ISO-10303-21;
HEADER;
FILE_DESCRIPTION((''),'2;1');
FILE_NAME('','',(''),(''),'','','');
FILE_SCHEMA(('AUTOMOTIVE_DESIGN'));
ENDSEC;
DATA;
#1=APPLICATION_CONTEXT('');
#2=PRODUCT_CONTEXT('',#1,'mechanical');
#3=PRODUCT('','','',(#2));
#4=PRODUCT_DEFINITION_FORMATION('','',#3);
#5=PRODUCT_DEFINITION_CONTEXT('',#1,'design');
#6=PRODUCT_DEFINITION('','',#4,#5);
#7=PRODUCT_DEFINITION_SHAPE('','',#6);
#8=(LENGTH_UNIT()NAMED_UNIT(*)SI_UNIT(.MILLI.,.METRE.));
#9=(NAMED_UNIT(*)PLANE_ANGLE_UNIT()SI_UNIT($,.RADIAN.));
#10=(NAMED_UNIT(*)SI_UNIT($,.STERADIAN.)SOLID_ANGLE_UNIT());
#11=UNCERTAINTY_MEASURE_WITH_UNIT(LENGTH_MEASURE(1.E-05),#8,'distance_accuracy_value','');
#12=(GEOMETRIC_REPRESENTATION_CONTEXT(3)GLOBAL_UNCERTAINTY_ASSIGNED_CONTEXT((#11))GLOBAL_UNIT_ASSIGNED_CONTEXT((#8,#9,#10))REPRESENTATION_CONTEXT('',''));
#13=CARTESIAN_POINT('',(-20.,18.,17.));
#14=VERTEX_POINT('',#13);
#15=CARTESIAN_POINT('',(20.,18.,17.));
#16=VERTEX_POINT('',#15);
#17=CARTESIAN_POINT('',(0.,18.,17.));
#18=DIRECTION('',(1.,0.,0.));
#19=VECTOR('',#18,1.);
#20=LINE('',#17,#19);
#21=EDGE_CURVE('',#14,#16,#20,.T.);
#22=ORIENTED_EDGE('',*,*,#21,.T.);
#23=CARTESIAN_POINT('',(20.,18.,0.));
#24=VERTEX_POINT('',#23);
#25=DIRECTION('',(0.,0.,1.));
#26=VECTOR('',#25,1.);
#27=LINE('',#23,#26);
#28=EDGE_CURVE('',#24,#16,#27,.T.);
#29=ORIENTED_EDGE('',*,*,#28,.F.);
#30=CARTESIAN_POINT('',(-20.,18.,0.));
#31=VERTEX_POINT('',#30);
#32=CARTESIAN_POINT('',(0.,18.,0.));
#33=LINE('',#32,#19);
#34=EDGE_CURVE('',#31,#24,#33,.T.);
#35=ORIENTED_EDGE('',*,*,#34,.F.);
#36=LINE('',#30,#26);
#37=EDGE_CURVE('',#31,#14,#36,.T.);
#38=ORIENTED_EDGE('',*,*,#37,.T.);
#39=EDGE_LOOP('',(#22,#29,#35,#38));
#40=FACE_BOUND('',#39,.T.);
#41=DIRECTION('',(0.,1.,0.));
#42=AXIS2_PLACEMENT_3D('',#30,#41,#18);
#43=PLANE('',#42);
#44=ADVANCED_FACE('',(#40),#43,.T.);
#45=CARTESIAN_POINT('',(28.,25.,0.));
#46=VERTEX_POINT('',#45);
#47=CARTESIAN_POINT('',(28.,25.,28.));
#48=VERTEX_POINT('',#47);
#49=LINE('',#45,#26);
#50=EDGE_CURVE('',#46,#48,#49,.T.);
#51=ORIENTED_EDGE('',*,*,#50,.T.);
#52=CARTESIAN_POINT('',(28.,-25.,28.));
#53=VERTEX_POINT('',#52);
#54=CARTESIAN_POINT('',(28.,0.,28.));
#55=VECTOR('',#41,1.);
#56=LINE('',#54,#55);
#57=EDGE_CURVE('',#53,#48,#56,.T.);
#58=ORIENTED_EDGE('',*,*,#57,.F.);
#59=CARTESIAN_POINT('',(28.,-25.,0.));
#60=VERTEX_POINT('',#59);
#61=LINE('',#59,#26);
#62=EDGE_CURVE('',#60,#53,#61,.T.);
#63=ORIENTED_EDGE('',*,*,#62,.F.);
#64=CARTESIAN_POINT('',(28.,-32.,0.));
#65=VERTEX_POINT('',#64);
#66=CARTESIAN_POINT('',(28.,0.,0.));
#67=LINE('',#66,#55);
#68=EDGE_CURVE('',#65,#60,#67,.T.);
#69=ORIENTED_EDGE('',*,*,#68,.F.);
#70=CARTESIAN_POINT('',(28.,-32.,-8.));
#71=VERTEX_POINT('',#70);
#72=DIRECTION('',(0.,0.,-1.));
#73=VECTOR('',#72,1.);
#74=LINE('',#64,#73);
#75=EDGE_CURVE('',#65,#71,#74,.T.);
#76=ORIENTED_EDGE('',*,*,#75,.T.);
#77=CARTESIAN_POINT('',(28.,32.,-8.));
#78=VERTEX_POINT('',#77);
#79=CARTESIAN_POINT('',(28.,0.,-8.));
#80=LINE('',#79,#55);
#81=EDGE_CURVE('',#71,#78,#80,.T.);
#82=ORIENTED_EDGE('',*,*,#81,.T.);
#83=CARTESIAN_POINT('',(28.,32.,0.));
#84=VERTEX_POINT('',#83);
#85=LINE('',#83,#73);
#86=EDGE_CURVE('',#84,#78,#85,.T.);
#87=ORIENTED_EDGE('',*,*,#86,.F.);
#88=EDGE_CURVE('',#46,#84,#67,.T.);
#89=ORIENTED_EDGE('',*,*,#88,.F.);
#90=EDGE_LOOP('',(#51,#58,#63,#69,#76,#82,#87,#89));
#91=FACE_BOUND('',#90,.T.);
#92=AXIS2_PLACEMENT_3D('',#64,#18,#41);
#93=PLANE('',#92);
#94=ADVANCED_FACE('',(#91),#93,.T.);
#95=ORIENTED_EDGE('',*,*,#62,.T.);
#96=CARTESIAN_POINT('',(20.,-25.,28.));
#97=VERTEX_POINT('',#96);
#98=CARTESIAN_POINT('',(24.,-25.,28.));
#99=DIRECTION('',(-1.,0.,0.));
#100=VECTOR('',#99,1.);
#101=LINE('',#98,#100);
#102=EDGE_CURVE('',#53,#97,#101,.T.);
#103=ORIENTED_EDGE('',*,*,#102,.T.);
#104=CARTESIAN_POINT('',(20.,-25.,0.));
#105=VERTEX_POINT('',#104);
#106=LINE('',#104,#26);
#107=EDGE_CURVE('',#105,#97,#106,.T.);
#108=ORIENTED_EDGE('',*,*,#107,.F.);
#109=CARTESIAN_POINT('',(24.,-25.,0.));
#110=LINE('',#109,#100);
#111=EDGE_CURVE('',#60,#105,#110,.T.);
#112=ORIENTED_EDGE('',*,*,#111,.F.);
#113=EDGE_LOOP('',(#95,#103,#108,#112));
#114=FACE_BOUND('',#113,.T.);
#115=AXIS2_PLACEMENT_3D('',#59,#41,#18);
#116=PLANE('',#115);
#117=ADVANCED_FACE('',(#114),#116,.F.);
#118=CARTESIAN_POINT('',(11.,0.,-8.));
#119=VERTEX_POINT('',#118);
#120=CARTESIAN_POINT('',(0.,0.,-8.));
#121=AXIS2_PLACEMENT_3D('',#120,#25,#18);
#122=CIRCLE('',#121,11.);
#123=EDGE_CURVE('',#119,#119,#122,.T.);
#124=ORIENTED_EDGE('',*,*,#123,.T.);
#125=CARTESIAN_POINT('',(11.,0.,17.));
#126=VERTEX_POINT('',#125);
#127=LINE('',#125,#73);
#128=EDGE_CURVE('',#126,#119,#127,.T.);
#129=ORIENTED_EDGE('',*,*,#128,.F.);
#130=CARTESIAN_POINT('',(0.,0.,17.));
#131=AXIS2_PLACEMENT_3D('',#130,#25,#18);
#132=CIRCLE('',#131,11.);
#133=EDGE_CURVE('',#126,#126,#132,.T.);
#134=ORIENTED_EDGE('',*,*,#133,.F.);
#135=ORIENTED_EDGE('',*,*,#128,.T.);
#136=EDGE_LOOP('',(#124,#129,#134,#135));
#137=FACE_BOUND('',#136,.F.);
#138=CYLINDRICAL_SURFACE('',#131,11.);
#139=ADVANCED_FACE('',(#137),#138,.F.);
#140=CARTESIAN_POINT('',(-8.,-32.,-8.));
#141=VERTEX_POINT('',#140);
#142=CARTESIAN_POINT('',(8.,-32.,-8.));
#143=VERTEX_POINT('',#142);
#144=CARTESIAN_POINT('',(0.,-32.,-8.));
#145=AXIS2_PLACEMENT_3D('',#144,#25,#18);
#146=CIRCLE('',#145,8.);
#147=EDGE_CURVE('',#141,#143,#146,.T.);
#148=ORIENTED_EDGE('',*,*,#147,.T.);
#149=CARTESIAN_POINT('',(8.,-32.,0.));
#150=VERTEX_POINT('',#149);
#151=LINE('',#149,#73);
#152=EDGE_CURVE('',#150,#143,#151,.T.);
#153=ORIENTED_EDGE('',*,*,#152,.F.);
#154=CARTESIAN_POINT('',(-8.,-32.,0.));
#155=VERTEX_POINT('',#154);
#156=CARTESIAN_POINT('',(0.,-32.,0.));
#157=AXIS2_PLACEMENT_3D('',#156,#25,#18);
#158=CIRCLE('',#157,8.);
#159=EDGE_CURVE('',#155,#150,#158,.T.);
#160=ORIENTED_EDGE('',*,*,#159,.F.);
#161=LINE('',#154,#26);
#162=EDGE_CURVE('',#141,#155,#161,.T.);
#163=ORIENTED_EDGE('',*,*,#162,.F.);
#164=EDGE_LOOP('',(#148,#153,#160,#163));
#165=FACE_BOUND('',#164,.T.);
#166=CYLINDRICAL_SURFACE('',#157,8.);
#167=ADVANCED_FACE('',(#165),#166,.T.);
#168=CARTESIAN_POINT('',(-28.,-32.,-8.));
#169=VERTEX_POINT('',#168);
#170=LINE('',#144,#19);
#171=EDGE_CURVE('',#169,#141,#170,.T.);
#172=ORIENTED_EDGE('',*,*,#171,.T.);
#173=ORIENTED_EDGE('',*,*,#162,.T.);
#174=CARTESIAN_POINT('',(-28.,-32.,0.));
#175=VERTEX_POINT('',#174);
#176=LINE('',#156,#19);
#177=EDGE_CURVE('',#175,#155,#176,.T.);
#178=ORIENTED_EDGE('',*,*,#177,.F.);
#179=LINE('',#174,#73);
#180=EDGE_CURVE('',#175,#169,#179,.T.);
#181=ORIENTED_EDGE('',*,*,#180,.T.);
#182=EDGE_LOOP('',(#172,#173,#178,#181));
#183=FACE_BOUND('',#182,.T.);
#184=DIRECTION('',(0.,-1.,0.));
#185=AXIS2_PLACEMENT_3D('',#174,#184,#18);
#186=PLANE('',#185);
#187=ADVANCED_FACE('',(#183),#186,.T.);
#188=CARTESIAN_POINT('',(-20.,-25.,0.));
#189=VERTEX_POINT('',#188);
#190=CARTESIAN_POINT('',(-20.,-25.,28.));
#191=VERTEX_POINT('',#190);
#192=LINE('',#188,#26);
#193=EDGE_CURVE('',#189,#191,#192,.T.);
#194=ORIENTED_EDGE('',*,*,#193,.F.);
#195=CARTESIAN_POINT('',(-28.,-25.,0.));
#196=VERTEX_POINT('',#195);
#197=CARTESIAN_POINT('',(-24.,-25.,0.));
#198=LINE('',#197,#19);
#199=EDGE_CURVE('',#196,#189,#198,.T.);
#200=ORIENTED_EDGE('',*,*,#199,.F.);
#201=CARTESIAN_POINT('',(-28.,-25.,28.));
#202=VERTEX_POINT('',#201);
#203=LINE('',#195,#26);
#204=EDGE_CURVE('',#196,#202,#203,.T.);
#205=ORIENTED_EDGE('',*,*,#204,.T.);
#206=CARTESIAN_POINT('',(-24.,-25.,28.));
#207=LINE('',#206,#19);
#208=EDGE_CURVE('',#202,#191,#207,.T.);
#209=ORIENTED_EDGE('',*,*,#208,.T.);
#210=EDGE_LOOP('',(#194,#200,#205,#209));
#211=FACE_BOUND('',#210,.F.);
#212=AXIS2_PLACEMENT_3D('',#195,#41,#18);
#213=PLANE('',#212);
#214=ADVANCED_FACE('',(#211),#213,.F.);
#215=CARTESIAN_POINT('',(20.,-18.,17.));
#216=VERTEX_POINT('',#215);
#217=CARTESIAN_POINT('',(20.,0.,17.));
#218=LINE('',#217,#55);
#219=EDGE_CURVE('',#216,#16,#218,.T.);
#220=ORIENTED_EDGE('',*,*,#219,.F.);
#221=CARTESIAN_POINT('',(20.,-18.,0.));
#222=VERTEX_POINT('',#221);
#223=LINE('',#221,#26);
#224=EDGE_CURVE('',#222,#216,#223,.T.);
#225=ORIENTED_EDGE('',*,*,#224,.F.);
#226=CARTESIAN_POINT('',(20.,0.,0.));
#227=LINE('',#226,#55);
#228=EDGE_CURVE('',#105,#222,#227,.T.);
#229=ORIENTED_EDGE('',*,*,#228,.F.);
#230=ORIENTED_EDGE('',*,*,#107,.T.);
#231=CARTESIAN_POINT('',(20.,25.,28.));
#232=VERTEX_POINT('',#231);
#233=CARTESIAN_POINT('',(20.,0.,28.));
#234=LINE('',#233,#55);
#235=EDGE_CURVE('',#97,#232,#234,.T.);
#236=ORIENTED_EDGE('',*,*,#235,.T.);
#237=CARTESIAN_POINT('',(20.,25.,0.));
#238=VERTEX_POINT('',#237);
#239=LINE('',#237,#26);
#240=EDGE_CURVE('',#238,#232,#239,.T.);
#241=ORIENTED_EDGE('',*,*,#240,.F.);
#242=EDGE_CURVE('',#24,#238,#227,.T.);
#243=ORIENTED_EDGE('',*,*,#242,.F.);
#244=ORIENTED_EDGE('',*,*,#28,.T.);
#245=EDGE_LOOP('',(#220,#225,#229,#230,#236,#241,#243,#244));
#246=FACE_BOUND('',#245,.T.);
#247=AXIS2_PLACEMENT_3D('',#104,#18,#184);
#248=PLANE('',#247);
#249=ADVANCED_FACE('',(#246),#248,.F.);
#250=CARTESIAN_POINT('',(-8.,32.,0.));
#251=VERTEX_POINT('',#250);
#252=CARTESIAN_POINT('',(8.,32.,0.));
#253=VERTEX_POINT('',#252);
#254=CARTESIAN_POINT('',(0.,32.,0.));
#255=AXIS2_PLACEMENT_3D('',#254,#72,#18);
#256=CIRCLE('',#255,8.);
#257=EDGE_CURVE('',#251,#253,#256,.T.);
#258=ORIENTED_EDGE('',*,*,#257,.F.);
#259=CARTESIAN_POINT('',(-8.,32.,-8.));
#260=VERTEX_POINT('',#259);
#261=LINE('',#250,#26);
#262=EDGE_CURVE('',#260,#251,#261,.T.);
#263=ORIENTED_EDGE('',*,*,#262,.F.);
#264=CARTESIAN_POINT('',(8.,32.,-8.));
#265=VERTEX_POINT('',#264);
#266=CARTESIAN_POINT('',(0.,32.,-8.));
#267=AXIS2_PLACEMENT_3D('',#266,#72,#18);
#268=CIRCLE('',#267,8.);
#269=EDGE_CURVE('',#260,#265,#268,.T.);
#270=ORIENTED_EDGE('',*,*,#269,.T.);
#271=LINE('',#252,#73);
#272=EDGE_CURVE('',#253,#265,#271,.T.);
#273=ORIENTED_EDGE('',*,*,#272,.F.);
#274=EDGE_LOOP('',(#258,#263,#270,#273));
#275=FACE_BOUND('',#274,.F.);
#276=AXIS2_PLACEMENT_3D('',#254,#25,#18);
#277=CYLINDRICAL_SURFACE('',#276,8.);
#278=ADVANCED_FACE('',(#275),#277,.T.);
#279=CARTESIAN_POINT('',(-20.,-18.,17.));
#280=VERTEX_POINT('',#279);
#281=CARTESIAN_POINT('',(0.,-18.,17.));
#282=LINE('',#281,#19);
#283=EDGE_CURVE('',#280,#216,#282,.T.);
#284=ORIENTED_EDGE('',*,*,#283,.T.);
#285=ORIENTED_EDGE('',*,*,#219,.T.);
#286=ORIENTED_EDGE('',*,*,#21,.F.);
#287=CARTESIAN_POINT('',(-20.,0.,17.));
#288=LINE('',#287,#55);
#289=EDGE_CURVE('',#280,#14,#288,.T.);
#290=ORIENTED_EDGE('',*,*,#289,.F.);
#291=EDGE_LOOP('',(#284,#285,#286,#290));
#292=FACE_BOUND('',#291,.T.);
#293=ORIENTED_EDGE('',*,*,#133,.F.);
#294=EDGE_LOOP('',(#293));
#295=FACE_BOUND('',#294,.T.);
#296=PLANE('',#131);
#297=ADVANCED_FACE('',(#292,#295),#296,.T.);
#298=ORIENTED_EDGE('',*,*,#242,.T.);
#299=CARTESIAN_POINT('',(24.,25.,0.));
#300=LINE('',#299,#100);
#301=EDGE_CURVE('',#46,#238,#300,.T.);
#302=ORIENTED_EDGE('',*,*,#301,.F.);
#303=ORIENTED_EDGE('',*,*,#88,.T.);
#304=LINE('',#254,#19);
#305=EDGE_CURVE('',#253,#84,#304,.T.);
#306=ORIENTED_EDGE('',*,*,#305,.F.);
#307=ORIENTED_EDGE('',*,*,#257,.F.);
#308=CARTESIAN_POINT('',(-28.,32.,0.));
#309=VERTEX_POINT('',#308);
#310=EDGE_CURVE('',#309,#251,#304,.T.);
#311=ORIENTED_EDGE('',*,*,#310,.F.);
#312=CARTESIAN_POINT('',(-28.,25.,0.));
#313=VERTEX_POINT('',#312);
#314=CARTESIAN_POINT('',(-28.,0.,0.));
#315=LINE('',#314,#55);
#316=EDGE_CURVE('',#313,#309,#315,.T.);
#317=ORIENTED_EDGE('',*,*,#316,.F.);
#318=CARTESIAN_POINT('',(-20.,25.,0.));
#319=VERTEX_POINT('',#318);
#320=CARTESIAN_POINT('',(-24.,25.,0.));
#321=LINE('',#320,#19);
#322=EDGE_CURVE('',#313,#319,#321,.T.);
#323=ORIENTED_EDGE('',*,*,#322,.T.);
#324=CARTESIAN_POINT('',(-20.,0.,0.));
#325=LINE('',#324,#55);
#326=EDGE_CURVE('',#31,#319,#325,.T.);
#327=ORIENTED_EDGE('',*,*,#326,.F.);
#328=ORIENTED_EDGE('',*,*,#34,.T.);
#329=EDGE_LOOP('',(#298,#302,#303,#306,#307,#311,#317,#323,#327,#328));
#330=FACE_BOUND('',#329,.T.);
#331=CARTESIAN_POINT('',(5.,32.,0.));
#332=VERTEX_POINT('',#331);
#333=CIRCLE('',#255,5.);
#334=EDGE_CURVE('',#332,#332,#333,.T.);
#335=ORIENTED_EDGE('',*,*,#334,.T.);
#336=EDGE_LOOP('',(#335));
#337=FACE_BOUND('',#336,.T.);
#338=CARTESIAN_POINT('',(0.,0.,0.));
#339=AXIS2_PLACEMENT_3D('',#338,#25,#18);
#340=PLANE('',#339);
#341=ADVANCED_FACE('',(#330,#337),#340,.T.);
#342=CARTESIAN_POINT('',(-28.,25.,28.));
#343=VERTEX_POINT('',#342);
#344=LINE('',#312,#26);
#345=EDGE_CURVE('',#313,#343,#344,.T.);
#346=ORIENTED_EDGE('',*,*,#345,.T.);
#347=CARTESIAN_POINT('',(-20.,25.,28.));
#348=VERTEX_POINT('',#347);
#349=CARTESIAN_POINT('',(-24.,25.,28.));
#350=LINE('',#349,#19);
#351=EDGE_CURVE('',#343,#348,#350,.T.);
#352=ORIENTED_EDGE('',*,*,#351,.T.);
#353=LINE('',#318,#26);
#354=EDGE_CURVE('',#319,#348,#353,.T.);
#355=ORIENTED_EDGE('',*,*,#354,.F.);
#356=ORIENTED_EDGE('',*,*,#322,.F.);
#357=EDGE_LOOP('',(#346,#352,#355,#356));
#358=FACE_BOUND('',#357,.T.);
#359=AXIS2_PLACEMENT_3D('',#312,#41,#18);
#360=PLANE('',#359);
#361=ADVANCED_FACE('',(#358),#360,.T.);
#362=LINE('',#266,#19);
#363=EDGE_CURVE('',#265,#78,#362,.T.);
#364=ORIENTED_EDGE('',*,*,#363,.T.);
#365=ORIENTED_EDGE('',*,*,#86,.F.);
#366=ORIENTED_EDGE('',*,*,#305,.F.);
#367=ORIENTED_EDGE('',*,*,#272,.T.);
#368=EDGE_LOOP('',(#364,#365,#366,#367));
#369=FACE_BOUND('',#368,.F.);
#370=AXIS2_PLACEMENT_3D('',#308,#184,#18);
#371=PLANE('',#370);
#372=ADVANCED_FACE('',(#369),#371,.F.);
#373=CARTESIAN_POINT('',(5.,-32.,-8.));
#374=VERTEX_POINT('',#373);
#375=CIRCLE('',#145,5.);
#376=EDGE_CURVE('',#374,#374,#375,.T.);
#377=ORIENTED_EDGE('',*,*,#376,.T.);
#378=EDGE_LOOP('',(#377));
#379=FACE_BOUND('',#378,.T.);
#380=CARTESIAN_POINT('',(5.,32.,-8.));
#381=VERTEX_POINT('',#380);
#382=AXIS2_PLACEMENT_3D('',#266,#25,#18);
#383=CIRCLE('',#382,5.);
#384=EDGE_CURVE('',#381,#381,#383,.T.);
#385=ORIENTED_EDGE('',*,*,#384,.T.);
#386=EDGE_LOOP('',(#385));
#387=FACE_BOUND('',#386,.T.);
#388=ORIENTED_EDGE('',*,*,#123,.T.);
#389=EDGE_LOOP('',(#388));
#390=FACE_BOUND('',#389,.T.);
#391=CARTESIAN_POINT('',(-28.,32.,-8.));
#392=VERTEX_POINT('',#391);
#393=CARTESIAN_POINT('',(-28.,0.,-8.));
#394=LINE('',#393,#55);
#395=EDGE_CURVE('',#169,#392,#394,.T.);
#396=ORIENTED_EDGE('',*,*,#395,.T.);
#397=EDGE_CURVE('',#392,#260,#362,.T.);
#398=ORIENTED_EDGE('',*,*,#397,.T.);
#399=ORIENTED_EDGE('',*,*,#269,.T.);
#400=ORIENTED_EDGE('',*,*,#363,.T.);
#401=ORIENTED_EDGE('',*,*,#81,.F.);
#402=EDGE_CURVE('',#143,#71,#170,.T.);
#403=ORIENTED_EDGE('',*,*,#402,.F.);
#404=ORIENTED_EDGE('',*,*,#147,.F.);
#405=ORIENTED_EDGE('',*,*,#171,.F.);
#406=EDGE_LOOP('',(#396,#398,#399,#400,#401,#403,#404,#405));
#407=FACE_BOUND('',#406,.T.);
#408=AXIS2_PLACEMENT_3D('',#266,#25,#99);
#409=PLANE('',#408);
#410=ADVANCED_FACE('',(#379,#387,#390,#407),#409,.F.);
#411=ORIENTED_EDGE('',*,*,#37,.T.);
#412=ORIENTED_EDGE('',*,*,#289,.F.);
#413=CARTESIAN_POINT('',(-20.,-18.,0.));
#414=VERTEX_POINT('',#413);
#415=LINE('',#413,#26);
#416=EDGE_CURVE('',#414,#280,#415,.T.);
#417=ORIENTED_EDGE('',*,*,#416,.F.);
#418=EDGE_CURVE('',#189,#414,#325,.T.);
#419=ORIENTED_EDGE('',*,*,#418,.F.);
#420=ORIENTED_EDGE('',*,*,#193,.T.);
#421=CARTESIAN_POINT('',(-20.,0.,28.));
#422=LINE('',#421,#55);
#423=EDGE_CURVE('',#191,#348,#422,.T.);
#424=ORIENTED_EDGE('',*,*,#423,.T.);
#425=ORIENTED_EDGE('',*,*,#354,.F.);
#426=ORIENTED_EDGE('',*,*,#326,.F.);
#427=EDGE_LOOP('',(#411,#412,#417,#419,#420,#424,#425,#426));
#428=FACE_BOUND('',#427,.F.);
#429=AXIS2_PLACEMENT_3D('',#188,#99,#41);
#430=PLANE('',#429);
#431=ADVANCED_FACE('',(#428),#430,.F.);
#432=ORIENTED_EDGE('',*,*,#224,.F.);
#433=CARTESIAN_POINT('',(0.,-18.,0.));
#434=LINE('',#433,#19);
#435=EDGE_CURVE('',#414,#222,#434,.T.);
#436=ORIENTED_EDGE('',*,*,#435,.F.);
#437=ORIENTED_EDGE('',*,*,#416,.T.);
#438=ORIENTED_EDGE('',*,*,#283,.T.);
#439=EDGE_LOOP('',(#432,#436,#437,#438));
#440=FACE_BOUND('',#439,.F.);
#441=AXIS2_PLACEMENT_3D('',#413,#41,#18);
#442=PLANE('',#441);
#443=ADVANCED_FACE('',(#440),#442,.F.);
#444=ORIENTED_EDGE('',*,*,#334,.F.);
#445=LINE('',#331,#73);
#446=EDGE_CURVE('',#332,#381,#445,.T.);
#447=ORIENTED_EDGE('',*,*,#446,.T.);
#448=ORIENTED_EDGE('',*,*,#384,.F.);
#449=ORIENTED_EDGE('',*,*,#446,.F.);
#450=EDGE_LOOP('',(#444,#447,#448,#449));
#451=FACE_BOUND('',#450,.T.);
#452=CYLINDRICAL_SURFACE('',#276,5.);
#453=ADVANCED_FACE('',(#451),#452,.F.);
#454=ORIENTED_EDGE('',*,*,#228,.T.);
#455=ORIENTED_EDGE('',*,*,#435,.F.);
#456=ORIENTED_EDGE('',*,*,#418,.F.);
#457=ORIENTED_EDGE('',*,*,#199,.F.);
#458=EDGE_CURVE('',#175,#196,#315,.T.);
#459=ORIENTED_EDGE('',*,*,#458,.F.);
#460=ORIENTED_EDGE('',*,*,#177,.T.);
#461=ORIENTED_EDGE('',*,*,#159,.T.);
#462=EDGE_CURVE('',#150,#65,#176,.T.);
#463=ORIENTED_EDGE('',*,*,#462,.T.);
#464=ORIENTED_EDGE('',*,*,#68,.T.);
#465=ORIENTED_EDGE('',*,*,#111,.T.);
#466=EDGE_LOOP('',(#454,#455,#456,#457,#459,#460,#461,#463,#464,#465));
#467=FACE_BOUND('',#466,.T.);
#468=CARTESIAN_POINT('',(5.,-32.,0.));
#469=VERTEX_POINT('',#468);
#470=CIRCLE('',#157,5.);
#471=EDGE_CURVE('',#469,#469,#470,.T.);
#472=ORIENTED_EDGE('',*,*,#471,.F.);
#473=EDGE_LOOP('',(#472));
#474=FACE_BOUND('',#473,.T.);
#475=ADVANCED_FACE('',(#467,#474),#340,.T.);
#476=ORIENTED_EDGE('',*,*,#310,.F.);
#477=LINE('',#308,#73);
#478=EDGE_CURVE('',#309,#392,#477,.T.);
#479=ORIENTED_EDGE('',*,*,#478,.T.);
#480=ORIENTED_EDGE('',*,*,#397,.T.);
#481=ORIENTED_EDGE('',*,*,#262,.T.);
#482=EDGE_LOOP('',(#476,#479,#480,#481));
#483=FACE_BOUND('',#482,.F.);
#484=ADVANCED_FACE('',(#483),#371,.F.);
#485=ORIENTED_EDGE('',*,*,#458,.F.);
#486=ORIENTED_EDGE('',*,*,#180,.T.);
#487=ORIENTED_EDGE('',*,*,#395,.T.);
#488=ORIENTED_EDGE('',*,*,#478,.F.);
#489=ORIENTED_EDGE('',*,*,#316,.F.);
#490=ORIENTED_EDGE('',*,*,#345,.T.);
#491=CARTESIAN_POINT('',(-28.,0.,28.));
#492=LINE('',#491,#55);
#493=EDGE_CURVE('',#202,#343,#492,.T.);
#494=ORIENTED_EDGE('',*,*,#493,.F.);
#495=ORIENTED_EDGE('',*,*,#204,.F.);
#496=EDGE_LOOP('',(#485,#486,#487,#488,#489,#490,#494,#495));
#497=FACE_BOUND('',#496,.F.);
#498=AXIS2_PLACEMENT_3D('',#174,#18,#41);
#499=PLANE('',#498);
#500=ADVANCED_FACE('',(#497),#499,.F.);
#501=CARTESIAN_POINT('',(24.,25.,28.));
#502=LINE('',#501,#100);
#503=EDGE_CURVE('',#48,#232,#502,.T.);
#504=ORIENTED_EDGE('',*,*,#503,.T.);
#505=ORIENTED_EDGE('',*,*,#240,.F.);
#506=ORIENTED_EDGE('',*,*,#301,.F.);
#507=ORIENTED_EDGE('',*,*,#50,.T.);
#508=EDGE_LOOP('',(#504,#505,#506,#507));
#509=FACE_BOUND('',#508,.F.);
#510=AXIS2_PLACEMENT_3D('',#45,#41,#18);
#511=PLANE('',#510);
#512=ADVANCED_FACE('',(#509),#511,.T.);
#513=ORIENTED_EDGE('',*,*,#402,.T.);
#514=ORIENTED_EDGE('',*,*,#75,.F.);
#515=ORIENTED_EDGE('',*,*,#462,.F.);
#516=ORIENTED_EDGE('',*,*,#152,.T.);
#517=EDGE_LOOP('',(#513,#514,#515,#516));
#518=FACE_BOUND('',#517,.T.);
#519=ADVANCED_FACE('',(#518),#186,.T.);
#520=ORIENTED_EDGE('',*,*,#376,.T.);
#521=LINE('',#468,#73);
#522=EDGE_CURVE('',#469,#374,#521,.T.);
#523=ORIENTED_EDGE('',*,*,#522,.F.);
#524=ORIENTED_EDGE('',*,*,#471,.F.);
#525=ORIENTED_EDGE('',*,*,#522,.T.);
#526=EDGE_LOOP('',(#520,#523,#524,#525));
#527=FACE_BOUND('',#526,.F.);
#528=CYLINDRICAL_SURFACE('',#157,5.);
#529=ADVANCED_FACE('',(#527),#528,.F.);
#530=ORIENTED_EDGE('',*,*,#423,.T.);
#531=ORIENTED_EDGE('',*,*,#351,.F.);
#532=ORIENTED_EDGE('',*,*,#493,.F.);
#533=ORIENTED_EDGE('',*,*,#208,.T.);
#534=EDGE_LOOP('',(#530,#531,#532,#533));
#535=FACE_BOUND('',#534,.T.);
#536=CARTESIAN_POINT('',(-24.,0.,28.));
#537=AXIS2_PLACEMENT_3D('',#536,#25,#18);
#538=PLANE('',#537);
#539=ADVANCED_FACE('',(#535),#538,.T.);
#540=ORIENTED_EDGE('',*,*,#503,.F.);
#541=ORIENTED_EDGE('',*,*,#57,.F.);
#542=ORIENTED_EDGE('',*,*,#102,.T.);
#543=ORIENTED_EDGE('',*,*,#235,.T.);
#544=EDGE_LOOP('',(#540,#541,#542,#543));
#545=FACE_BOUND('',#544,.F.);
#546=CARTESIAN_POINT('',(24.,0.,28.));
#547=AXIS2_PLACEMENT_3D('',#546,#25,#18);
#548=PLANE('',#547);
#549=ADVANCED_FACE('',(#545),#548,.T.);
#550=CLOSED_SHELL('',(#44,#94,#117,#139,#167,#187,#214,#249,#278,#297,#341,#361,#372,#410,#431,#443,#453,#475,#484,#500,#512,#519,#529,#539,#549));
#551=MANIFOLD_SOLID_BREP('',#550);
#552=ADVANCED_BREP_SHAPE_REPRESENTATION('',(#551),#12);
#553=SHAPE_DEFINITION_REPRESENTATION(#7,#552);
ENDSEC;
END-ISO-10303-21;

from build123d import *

# Parameters (mm, degrees)
F0_W      = 56
F0_H      = 64
F1_DEPTH  = 8
F2_W      = 8
F2_H      = 50
F3_DEPTH  = 28
F4_R      = 8
F5_DEPTH  = 8
F6_R      = 5
F7_DEPTH  = 8.001
F8_W      = 40
F8_H      = 36
F9_DEPTH  = 17
F10_R     = 11
F11_DEPTH = 25.001


# Not quite as in the source:
# - a pattern or mirror of a feature is missing from the dataset's text; its kind, count and spacing are read off the source's solid


with BuildPart() as f1:
    # F0 (on Top) → F1 (new body)
    with BuildSketch(Plane.XY):
        Rectangle(F0_W, F0_H)
    extrude(amount=-F1_DEPTH)

    # F2 (on face) → F3 (join)
    with BuildSketch(Plane.XY):
        with Locations((-24, 0)):
            Rectangle(F2_W, F2_H)
    f3 = extrude(amount=F3_DEPTH)

    # F3_copies: F3 across plane
    add(f3.mirror(Plane(origin=(0, 0, 0), x_dir=(0, 0, 1), z_dir=(1, 0, 0))))

    # F4 (on face) → F5 (join, through all)
    with BuildSketch(Plane.XY):
        with Locations((0, -32)):
            Circle(F4_R)
    f5 = extrude(amount=-F5_DEPTH)

    # F5_copies: F5 across plane
    add(f5.mirror(Plane.ZX))

    # F6 (on face) → F7 (cut, through all)
    with BuildSketch(Plane.XY):
        with Locations((0, -32)):
            Circle(F6_R)
    f7 = extrude(amount=-F7_DEPTH, mode=Mode.SUBTRACT)

    # F7_copies: F7 across plane
    add(f7.mirror(Plane.ZX), mode=Mode.SUBTRACT)

    # F8 (on face) → F9 (join)
    with BuildSketch(Plane.XY):
        Rectangle(F8_W, F8_H)
    extrude(amount=F9_DEPTH)

    # F10 (on face) → F11 (cut, through all)
    with BuildSketch(Plane.XY.offset(17)):
        Circle(F10_R)
    extrude(amount=-F11_DEPTH, mode=Mode.SUBTRACT)


solid = f1.part
